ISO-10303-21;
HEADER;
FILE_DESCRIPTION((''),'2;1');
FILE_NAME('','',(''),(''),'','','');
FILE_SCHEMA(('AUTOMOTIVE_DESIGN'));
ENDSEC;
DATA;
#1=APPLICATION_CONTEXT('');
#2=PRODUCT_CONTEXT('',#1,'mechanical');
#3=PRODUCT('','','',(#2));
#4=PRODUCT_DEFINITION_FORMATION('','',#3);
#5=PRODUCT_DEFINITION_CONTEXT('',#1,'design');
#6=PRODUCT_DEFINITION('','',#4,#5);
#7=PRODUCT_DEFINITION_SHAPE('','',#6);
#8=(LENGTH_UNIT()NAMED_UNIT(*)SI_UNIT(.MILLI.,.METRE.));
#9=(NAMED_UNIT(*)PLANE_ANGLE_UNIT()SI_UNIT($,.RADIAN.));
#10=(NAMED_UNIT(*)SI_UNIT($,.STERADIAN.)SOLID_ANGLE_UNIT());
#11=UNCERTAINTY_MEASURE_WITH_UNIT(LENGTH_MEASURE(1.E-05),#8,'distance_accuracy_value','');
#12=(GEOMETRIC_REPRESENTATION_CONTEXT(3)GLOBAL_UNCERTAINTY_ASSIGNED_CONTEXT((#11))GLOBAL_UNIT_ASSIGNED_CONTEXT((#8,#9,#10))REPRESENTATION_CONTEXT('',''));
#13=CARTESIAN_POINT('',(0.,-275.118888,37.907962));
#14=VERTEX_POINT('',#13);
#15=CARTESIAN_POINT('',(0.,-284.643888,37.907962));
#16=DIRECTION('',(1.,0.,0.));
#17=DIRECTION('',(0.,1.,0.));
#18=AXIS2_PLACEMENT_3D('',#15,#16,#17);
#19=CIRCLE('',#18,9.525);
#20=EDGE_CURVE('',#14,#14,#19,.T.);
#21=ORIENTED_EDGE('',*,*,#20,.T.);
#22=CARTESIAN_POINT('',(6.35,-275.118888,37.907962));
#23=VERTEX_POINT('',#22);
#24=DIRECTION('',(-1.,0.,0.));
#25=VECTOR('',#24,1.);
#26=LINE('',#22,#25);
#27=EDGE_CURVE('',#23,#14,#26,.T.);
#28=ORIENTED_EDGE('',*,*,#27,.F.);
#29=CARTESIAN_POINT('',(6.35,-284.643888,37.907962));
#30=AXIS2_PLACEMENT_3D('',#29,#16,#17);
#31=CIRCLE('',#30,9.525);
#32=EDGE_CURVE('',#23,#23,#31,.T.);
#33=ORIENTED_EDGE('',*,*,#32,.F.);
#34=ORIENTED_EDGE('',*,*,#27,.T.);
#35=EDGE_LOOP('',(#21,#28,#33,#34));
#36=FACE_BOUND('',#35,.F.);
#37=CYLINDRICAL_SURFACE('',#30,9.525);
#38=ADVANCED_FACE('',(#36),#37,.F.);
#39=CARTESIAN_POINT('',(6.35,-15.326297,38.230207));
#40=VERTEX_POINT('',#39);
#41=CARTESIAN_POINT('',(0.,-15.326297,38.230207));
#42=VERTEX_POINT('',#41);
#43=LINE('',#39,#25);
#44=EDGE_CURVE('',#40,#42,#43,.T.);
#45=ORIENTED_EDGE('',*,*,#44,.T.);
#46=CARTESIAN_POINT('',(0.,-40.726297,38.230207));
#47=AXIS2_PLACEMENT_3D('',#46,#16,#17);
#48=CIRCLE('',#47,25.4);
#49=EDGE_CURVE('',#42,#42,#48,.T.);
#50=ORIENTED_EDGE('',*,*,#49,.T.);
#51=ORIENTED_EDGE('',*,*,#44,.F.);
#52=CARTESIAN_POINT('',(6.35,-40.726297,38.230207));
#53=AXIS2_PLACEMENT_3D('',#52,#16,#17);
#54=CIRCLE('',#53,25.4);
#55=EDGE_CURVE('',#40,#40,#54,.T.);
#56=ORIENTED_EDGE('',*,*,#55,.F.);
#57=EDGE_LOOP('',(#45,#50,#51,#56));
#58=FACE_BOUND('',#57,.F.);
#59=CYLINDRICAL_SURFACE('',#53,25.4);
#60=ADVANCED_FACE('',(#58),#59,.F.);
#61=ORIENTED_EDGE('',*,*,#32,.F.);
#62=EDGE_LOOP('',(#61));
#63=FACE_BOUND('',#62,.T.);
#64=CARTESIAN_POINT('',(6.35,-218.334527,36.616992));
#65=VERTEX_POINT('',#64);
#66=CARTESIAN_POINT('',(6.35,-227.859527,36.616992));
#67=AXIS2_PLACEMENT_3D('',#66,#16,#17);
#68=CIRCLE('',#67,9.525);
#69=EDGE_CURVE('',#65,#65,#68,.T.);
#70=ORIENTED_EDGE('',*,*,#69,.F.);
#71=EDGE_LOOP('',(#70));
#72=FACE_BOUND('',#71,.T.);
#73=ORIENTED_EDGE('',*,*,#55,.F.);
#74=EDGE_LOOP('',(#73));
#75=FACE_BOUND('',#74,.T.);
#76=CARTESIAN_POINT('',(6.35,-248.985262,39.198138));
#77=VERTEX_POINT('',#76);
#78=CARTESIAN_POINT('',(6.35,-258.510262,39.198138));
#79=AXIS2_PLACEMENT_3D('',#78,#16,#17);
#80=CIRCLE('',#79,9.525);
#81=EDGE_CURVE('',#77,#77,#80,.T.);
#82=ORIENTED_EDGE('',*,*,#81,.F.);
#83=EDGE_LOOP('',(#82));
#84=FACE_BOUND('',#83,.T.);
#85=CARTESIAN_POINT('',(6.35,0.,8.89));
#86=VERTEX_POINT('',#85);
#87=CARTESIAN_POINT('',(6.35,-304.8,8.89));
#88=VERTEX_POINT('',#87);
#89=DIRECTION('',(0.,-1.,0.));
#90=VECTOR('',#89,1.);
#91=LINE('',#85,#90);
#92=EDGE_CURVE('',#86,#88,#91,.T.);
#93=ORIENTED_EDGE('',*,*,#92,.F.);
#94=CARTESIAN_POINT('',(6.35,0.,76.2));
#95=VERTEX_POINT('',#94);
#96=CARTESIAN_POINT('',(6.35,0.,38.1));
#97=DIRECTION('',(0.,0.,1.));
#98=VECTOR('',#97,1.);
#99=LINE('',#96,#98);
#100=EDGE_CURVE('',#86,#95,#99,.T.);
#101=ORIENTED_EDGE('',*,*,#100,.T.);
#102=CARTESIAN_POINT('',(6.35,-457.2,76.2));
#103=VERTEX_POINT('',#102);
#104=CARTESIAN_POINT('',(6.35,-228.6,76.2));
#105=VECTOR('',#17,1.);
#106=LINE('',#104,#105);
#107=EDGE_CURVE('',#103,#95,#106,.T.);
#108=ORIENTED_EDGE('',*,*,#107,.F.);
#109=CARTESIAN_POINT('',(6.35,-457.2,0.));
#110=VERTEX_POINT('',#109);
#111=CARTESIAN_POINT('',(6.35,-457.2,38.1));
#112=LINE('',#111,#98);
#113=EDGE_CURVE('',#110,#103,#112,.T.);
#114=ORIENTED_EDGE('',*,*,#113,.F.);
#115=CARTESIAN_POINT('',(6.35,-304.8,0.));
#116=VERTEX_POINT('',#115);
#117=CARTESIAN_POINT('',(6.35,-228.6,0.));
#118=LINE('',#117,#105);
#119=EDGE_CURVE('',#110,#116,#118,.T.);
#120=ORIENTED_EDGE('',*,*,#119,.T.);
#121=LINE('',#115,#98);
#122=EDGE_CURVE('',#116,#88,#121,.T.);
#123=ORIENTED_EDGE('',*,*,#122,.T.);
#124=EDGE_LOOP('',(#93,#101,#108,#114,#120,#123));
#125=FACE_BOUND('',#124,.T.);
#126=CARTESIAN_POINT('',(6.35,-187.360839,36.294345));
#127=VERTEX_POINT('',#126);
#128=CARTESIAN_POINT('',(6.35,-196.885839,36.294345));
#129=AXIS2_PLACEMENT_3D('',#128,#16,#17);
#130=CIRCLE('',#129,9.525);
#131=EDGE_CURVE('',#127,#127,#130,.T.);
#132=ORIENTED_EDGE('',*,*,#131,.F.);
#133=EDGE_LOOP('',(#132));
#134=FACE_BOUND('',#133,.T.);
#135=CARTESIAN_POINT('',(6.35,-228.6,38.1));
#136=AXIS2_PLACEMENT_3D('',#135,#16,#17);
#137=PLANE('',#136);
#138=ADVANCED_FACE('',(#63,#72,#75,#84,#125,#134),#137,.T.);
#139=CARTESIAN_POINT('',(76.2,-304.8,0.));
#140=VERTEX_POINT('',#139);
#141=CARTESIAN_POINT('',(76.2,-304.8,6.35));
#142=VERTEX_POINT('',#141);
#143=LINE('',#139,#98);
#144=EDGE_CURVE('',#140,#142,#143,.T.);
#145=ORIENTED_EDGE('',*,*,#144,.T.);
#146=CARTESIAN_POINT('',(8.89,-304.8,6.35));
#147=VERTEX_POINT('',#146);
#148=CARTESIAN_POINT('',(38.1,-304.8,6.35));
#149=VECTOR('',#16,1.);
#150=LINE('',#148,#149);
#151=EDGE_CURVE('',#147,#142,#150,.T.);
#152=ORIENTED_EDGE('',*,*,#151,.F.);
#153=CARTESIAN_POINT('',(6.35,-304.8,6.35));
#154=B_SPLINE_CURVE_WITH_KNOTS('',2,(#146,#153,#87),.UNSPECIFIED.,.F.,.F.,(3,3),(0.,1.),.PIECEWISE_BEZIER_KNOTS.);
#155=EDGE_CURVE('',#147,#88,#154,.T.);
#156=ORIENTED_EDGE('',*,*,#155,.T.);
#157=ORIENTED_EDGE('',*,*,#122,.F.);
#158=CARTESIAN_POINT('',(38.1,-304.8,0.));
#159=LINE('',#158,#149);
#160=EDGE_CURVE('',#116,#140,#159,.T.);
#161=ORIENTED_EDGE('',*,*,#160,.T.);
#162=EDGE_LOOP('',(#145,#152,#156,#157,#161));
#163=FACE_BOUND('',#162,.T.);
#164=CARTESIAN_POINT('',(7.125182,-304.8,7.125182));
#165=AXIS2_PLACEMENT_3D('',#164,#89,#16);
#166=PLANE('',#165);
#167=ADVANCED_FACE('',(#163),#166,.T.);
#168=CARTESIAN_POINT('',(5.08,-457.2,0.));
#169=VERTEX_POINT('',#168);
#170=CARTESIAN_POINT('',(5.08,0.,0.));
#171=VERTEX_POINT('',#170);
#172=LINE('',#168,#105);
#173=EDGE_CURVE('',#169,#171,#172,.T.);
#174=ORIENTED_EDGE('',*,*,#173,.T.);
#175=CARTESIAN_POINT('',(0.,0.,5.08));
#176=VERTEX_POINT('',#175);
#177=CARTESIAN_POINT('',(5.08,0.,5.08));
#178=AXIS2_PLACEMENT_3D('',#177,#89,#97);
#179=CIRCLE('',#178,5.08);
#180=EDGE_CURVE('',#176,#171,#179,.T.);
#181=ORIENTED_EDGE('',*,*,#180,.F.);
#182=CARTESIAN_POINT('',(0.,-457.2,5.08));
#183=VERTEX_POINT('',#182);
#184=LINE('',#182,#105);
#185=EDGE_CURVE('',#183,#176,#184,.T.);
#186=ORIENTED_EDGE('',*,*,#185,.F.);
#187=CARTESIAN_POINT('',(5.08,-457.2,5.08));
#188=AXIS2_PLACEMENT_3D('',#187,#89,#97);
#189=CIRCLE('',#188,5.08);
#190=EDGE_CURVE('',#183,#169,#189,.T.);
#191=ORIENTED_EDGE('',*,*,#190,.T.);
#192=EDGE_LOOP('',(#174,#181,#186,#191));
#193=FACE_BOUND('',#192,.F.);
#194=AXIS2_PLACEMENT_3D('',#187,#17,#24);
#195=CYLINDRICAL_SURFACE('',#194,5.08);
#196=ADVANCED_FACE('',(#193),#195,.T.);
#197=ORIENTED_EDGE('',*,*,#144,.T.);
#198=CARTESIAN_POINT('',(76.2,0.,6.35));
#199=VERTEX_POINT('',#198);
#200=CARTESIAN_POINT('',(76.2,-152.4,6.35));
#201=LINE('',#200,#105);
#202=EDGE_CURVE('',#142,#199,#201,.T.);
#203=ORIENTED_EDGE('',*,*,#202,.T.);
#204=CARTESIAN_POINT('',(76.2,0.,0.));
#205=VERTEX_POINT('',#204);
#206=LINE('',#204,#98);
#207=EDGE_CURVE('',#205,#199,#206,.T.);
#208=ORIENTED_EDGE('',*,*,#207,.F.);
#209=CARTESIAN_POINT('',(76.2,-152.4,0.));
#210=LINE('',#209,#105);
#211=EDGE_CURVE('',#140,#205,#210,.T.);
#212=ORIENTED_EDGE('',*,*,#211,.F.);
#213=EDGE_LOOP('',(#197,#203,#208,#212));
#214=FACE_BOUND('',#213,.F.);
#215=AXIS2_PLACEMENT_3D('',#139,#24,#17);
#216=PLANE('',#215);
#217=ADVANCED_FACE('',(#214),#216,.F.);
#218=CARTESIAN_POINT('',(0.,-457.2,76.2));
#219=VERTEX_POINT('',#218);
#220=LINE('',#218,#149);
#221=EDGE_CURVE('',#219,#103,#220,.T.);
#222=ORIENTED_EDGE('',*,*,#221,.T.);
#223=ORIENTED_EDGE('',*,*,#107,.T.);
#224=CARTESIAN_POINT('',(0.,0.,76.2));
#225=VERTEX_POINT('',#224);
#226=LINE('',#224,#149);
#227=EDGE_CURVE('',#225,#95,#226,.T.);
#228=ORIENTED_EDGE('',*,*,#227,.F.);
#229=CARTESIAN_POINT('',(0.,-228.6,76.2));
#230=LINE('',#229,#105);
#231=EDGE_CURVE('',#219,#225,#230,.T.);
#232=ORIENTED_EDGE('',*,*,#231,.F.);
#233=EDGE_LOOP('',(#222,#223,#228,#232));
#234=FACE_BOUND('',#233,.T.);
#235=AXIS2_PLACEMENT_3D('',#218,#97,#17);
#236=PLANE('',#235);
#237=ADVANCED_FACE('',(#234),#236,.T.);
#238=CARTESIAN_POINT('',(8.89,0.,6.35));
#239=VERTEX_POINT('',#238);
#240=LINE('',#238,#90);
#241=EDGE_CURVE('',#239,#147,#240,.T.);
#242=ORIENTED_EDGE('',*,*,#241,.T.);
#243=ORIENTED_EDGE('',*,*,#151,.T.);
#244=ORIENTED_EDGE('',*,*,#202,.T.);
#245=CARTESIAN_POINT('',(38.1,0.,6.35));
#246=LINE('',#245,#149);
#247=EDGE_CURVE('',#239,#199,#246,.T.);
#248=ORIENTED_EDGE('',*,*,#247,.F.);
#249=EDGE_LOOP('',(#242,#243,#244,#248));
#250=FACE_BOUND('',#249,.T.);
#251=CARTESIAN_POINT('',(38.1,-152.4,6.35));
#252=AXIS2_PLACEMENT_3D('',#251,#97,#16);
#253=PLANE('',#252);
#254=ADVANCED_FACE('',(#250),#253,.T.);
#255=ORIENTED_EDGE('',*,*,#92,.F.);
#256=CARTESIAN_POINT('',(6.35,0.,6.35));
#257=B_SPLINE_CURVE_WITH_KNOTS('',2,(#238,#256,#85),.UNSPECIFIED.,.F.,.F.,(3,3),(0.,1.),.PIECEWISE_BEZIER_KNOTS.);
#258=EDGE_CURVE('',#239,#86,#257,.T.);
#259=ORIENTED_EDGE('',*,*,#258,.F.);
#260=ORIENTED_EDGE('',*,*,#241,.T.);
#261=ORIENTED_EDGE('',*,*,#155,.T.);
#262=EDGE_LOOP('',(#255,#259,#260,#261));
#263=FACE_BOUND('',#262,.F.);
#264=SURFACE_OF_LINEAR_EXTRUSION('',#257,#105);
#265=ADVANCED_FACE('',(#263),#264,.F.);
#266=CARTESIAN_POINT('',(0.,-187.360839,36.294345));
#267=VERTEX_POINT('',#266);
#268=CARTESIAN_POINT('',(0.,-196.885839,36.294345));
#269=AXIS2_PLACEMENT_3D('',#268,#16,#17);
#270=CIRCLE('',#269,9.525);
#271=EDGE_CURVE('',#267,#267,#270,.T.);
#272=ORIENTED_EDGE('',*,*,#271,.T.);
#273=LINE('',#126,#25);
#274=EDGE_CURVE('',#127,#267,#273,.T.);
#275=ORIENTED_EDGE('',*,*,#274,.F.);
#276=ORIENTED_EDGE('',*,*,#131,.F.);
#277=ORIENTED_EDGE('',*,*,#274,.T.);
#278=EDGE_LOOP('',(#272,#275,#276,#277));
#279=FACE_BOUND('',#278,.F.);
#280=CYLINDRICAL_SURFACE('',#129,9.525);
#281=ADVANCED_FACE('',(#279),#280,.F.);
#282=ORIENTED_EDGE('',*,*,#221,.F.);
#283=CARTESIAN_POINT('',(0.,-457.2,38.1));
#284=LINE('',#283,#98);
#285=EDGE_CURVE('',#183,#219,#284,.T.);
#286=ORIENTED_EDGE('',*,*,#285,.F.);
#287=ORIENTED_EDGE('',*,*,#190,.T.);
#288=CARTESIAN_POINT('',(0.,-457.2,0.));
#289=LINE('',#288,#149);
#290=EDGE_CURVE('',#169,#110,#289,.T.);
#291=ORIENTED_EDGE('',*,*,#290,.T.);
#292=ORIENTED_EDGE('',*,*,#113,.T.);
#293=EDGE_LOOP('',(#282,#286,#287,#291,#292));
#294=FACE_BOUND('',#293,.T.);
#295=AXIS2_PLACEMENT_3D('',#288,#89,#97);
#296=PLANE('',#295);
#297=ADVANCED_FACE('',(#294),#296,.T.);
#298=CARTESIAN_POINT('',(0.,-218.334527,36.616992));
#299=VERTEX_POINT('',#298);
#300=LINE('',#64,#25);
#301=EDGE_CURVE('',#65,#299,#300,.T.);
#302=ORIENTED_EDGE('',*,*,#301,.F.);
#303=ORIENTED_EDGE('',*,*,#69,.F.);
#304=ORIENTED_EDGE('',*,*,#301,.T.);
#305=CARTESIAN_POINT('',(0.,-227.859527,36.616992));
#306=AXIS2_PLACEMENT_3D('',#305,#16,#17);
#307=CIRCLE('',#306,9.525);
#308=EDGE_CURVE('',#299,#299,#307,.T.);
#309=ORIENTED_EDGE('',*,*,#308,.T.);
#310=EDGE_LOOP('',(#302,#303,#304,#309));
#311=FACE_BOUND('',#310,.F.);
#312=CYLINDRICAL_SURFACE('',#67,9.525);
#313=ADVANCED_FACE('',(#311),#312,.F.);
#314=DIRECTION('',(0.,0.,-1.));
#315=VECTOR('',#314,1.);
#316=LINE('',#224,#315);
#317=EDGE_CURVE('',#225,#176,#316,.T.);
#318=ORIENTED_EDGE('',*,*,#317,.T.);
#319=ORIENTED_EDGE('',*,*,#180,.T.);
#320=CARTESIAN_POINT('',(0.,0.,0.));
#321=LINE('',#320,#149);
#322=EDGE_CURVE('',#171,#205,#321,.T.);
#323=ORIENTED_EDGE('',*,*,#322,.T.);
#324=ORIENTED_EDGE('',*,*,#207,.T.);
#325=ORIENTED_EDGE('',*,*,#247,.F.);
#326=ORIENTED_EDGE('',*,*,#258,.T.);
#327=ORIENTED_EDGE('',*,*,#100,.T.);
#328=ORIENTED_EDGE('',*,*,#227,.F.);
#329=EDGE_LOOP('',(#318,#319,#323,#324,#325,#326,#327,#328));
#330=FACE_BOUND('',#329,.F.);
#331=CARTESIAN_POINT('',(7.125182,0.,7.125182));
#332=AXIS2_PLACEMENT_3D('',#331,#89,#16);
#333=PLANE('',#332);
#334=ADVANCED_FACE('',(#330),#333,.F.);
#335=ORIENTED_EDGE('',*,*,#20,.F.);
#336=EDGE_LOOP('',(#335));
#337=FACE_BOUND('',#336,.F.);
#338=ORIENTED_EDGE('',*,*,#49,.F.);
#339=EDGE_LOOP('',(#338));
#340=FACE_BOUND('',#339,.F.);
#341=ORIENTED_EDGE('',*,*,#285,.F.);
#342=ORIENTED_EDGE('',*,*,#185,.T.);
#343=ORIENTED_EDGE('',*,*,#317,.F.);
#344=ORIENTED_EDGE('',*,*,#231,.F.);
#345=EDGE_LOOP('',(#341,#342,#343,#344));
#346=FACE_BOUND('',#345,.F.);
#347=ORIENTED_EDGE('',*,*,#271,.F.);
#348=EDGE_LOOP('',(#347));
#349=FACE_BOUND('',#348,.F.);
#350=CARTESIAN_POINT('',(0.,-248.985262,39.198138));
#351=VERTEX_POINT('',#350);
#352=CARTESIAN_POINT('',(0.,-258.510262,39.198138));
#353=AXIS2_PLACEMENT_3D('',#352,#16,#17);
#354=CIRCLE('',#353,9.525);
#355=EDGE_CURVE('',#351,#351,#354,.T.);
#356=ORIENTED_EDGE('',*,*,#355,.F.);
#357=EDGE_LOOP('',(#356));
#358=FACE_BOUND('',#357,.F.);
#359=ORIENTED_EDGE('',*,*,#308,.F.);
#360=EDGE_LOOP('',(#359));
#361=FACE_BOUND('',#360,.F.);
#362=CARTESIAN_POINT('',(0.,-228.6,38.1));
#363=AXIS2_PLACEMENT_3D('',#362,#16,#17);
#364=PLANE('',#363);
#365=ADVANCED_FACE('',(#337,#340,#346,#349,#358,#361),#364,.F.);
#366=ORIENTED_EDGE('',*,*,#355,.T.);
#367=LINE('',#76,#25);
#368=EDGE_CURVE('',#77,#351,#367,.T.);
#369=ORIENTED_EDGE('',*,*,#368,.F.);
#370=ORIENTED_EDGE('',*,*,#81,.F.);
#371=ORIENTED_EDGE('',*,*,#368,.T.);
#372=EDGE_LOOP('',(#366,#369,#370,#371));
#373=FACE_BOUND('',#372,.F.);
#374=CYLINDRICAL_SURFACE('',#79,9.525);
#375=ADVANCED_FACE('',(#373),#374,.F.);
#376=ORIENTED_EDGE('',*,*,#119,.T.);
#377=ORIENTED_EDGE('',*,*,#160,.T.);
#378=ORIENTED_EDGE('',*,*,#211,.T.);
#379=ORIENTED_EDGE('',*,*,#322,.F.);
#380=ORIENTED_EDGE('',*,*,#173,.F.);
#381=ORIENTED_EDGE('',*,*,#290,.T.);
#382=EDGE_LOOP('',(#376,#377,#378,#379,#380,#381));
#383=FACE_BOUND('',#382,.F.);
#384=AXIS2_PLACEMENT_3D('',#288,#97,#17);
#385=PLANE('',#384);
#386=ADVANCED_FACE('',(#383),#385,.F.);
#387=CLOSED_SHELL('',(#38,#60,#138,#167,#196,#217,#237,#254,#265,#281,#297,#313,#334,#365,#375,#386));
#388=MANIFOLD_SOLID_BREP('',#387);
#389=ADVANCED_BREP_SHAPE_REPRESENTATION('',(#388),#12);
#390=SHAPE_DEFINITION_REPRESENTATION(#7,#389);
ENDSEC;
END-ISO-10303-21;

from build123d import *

# Parameters (mm, degrees)
F0_W        = 76.2
F0_H        = 304.8
F1_DEPTH    = 6.35
F2_W        = 457.2
F2_H        = 76.2
F3_DEPTH    = 6.35
F4_R        = 5.08
F5_T1_DEPTH = 304.8
F6_R        = 9.525
F7_DEPTH    = 25.4
F8_R        = 9.525
F9_DEPTH    = 25.4
F10_R       = 9.525
F11_DEPTH   = 25.4
F12_R       = 9.525
F13_DEPTH   = 25.4
F14_R       = 25.4
F15_DEPTH   = 25.4


# Not quite as in the source:
# - a fillet or chamfer that OpenCascade refuses, or shapes differently, is made with other operations: its cross-section is extruded or revolved along the edge and cut away or added


with BuildPart() as f1:
    # F0 (on Top) → F1 (new body)
    with BuildSketch(Plane.XY):
        with Locations((38.1, -152.4)):
            Rectangle(F0_W, F0_H)
    extrude(amount=F1_DEPTH)

    # F2 (on Right) → F3 (join)
    with BuildSketch(Plane.YZ):
        with Locations((-228.6, 38.1)):
            Rectangle(F2_W, F2_H)
    extrude(amount=F3_DEPTH)

    # F4
    f4_edges = [f1.edges().sort_by_distance(p)[0] for p in [
        (0, -228.6, 0),
    ]]
    fillet(f4_edges, radius=F4_R)

    # F5: fillet of radius 2.54 on 1 edges, made by hand

    # F5_s2 → F5_t1 (join)
    with BuildSketch(Plane.XZ):
        with BuildLine():
            add(Edge.make_bspline(
                [(8.89, 6.35), (6.35, 6.35), (6.35, 8.89)],
                knots=[0, 0, 0, 1, 1, 1], degree=2, weights=[1, 1, 1]))
            Line((6.35, 8.89), (6.35, 6.35))
            Line((6.35, 6.35), (8.89, 6.35))
        make_face()
    extrude(amount=F5_T1_DEPTH)

    # F6 (on face) → F7 (cut)
    with BuildSketch(Plane.YZ.offset(6.35)):
        with Locations((-284.6438884735, 37.907961756)):
            Circle(F6_R)
    extrude(amount=-F7_DEPTH, mode=Mode.SUBTRACT)

    # F8 (on face) → F9 (cut)
    with BuildSketch(Plane.YZ.offset(6.35)):
        with Locations((-258.5102617741, 39.1981378198)):
            Circle(F8_R)
    extrude(amount=-F9_DEPTH, mode=Mode.SUBTRACT)

    # F10 (on face) → F11 (cut)
    with BuildSketch(Plane.YZ.offset(6.35)):
        with Locations((-227.8595268726, 36.6169922054)):
            Circle(F10_R)
    extrude(amount=-F11_DEPTH, mode=Mode.SUBTRACT)

    # F12 (on face) → F13 (cut)
    with BuildSketch(Plane.YZ.offset(6.35)):
        with Locations((-196.8858391047, 36.2943448126)):
            Circle(F12_R)
    extrude(amount=-F13_DEPTH, mode=Mode.SUBTRACT)

    # F14 (on face) → F15 (cut)
    with BuildSketch(Plane.YZ.offset(6.35)):
        with Locations((-40.7262966037, 38.2302068174)):
            Circle(F14_R)
    extrude(amount=-F15_DEPTH, mode=Mode.SUBTRACT)


solid = f1.part
